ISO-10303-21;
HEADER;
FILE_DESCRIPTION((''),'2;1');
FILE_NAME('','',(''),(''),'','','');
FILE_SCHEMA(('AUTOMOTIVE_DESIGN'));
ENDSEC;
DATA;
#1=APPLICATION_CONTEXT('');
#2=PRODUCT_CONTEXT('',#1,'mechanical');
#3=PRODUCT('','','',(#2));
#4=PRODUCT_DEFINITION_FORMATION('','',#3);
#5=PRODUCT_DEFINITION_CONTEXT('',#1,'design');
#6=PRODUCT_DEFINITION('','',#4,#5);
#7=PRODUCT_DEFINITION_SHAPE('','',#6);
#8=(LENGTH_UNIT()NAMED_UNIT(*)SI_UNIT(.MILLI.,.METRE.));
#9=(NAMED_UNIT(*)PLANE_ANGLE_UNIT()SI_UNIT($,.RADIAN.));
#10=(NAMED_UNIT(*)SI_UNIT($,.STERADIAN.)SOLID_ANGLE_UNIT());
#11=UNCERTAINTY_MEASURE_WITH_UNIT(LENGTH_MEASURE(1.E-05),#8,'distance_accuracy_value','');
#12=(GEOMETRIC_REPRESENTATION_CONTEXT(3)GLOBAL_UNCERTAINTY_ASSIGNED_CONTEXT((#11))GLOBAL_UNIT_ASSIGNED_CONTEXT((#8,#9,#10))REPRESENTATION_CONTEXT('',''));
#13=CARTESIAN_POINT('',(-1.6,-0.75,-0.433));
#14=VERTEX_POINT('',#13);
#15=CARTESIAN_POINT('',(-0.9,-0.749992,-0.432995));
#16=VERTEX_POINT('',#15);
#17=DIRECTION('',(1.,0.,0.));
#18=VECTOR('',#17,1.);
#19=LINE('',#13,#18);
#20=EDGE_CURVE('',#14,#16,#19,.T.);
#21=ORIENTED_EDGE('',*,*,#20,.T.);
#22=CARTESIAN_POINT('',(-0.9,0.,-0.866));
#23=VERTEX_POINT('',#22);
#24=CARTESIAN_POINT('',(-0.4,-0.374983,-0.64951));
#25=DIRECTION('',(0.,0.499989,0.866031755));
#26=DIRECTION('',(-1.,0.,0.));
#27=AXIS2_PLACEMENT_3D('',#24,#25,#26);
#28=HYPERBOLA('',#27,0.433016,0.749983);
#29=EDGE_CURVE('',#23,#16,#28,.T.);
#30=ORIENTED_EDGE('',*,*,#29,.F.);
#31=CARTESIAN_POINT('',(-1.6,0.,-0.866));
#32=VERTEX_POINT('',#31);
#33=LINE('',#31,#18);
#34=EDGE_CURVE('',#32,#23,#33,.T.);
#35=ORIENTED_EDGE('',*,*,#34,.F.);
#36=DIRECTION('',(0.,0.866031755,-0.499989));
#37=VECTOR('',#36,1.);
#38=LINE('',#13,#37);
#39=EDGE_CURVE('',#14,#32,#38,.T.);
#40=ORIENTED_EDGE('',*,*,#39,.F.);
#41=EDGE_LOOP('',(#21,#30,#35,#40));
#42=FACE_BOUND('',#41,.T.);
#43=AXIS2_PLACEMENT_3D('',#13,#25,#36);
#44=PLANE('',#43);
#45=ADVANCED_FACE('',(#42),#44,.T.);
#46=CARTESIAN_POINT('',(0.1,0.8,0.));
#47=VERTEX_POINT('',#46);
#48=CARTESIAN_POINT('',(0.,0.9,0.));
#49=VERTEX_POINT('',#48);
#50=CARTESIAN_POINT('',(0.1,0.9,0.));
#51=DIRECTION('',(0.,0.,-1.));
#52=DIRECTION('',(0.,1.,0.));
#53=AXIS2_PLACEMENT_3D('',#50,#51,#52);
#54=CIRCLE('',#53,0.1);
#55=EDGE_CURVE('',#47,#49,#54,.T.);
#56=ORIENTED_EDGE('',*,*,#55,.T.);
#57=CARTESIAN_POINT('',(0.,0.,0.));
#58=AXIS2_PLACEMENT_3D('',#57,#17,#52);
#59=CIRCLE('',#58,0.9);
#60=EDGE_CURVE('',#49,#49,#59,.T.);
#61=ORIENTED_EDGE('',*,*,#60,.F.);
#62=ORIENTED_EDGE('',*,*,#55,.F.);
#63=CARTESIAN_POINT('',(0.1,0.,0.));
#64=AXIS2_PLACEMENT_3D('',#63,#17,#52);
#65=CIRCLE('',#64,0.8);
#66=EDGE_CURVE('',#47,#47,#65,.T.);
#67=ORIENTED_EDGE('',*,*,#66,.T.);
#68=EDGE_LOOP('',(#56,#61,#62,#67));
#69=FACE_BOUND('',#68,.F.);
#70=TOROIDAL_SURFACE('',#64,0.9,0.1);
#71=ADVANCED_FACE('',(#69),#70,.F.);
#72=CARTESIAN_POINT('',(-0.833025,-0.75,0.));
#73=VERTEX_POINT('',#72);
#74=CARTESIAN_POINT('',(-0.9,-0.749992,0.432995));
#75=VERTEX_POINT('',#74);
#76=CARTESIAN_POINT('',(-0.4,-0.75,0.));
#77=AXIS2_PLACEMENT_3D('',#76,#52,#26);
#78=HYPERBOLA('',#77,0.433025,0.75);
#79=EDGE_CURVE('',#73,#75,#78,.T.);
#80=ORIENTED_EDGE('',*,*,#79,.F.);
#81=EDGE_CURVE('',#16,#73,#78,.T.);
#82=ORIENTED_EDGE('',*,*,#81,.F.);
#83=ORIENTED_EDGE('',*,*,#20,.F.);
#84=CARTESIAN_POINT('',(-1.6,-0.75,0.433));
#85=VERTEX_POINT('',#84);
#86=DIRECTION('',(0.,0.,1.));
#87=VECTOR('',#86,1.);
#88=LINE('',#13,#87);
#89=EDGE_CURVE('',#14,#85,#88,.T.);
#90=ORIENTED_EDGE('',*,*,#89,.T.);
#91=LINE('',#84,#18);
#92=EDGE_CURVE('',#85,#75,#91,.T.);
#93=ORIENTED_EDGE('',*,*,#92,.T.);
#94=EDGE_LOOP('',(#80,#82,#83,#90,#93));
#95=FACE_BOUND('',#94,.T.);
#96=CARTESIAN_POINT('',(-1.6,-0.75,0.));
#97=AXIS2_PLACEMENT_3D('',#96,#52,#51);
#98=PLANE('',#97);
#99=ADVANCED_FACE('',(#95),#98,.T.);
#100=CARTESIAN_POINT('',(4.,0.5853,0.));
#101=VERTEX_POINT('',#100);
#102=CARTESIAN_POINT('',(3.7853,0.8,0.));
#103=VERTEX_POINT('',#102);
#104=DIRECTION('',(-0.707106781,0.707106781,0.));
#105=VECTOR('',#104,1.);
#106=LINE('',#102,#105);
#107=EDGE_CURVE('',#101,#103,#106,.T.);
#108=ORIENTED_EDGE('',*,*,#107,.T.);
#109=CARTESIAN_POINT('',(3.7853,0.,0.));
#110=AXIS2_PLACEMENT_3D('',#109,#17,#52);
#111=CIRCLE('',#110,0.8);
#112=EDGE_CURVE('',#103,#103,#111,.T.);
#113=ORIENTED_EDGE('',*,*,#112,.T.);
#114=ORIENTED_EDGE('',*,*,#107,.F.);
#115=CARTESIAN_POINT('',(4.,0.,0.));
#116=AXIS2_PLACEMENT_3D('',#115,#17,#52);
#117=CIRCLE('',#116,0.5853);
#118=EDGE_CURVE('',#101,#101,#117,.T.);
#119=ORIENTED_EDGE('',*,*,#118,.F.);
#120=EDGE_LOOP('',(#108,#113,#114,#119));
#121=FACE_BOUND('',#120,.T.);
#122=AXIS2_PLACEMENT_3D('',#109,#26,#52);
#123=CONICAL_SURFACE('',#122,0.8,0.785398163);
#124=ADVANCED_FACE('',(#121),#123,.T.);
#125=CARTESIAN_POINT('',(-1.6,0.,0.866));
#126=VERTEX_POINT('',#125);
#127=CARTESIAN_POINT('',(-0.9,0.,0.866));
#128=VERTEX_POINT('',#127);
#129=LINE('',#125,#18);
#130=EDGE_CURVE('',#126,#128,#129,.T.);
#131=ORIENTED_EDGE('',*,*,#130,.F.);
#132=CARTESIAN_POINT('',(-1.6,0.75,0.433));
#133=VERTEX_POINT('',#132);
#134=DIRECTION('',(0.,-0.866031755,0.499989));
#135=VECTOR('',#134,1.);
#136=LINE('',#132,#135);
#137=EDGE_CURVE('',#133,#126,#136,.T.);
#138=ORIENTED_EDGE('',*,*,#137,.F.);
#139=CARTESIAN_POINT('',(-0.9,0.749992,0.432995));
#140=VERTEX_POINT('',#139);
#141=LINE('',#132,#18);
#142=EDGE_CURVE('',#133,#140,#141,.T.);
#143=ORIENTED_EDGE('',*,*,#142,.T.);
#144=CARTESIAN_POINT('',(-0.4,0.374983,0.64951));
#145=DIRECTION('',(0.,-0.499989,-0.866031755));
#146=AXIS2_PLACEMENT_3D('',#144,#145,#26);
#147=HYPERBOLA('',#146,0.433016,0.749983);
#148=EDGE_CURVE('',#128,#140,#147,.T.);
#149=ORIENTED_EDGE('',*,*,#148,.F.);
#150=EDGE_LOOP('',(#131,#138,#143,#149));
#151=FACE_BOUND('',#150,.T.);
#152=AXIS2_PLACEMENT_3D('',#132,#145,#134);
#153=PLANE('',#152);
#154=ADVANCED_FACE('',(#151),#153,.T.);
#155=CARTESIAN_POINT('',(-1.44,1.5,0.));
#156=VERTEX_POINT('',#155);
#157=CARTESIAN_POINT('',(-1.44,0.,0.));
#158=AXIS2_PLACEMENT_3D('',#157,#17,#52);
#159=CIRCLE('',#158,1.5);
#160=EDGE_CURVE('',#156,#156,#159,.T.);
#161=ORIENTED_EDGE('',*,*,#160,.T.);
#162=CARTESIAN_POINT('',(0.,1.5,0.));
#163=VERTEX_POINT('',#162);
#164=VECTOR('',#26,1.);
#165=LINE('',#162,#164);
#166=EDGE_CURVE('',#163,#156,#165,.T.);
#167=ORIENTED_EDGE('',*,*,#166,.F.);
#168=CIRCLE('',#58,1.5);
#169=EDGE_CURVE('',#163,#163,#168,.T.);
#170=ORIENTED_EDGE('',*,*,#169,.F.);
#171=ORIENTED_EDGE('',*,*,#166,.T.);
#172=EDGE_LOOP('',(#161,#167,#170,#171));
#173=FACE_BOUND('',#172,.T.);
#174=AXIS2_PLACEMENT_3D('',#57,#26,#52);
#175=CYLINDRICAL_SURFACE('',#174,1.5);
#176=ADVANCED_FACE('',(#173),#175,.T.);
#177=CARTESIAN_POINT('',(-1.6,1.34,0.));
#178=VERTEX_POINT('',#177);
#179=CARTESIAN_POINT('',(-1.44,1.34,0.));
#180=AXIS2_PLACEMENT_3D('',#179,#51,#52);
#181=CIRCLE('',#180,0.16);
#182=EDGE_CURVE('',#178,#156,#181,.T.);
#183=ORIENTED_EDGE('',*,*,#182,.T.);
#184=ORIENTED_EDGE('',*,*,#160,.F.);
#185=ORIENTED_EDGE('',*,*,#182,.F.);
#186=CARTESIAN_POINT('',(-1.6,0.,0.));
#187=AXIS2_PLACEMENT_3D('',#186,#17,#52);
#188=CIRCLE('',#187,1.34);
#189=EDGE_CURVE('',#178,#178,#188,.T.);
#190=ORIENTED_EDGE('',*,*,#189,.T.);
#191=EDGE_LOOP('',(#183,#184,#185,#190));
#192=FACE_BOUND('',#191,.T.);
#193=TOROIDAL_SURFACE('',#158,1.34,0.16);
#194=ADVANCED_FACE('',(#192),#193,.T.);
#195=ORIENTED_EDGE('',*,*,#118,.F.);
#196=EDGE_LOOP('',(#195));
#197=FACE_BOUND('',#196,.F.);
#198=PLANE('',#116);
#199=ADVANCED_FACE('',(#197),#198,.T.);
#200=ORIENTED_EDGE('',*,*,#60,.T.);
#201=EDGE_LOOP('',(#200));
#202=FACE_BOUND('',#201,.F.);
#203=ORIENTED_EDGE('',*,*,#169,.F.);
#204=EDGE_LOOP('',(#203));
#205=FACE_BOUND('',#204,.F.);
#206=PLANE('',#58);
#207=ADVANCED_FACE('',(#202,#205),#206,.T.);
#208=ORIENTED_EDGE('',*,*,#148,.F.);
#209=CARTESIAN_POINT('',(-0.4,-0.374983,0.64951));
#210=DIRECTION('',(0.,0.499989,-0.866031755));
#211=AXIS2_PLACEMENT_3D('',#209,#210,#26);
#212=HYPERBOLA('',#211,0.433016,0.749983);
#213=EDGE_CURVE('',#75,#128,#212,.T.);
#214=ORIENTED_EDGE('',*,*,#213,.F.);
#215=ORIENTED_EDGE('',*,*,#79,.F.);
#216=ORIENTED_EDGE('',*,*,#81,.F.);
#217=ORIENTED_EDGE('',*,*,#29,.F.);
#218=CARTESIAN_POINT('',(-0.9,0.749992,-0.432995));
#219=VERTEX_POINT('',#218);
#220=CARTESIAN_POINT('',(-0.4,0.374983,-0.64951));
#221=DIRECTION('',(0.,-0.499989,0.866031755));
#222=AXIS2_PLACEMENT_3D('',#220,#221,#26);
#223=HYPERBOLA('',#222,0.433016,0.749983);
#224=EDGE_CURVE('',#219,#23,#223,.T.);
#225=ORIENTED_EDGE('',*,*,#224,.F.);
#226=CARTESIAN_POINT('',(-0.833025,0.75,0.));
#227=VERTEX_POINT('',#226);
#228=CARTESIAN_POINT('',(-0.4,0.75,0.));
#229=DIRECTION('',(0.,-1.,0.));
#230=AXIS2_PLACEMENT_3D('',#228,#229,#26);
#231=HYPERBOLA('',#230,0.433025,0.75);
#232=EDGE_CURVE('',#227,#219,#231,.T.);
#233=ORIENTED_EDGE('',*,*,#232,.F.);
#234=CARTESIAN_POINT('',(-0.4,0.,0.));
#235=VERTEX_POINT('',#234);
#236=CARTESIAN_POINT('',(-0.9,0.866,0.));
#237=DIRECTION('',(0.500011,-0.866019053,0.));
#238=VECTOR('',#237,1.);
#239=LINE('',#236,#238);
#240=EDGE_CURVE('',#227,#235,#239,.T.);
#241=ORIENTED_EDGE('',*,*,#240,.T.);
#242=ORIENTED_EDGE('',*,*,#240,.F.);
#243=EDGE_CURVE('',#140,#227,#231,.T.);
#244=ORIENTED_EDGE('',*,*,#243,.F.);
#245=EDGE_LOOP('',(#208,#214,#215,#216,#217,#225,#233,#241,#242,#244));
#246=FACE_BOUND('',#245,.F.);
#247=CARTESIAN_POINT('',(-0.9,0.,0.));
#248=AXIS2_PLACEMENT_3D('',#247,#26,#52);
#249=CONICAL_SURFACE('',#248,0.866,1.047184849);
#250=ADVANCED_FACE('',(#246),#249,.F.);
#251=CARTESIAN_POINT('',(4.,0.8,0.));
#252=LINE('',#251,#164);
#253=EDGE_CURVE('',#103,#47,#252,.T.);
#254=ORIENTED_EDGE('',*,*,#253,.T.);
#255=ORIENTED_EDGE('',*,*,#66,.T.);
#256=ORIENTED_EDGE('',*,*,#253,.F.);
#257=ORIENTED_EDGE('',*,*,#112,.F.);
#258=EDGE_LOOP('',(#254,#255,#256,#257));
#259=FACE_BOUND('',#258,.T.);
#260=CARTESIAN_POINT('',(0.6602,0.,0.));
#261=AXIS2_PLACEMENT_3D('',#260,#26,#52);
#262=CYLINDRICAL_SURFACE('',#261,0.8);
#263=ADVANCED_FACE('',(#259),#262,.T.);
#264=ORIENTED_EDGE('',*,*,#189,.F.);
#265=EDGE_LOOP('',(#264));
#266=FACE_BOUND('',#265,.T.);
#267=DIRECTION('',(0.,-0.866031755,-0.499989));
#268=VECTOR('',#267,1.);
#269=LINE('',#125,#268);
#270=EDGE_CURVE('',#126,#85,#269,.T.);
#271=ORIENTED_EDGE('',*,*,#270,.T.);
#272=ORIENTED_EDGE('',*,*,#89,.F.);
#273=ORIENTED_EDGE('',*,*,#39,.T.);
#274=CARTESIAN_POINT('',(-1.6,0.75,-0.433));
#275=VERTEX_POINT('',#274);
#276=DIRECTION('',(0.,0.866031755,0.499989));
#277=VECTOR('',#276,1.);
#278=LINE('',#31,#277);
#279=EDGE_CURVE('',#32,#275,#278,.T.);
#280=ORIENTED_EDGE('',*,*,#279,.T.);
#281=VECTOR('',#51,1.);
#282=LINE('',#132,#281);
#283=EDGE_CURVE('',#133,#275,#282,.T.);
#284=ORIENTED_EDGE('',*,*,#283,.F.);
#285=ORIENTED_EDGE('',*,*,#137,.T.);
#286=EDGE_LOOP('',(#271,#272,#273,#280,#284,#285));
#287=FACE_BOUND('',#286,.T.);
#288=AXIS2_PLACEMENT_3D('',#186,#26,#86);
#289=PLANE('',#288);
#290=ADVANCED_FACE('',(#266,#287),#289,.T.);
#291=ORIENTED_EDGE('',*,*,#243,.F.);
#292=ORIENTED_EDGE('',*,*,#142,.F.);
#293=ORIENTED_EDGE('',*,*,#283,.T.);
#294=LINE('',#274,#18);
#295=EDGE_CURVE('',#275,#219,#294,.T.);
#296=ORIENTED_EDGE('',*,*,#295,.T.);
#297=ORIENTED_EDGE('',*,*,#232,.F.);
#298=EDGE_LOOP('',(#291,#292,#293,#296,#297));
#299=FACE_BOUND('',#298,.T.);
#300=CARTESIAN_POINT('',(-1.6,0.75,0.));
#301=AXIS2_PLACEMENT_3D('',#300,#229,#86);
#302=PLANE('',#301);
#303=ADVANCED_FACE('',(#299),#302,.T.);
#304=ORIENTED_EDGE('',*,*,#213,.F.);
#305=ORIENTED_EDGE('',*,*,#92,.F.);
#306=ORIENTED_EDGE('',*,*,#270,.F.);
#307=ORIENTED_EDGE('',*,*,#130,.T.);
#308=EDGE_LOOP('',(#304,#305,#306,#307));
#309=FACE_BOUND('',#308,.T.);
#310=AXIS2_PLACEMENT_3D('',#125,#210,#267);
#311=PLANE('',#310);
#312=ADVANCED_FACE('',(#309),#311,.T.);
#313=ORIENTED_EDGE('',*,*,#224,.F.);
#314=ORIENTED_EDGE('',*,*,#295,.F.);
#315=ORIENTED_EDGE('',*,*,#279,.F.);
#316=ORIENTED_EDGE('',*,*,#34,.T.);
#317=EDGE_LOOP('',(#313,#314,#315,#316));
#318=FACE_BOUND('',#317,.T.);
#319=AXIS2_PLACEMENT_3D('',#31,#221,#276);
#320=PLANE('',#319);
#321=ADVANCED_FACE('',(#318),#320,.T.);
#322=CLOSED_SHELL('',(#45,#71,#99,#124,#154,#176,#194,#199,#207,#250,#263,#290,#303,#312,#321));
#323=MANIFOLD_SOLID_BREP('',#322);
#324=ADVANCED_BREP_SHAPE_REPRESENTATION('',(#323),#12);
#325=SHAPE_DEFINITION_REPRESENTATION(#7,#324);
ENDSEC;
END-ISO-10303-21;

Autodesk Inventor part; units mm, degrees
ref_plane "YZ Plane" through (0, 0, 0) normal (1, 0, 0) x (0, 1, 0)
ref_plane "XZ Plane" through (0, 0, 0) normal (0, 1, 0) x (-1, 0, 0)
sketch "Sketch1" plane through (0, 0, 0) normal (0, 0, 1) x (1, 0, 0)
  line L0 (-0.4, 0) -> (4, 0)
  line L1 (4, 0) -> (4, 0.8)
  line L2 (4, 0.8) -> (0.875, 0.8)
  line L3 (0.875, 0.8) -> (0.6602, 0.8)
  line L4 (0.6602, 0.8) -> (0, 0.8)
  line L5 (0, 0.8) -> (0, 1.5)
  line L6 (0, 1.5) -> (-1.6, 1.5)
  line L7 (-1.6, 1.5) -> (-1.6, 0.866)
  line L8 (-1.6, 0.866) -> (-0.9, 0.866)
  line L9 (-0.9, 0.866) -> (-0.4, 0)
  line L10 (-2.72, 0) -> (5.12, 0) projected
  line L11 (0, -0.3) -> (0, 1.8) projected
  line L12 (0.875, 0.8) -> (0, 0.8) construction
  dimension "d1" = 3.125
  dimension "d2" = 0.2148
  dimension "d3" = 1.6
  dimension "d4" = 0.7
  dimension "d5" = 60
  dimension "d6" = 1.6
  dimension "d7" = 1.6
  dimension "d8" = 1.7321
  dimension "d9" = 3
  dimension "d26" = 4
revolve "Body" add sketch "Sketch1" angle 360 about axis through (-0.4, 0, 0) along (1, 0, 0)
sketch "Sketch2" plane through (-1.6, 0, 0) normal (-1, 0, 0) x (0, 0, 1)
  circle A0 centre (0, 0) radius 0.866 projected
  line L0 (0, -2.1) -> (0, 2.1) projected
  line L1 (-2.1, 0) -> (2.1, 0) projected
  line L2 (0.866, 0) -> (0.433, -0.75)
  line L3 (0.433, -0.75) -> (-0.433, -0.75)
  line L4 (-0.433, -0.75) -> (-0.866, 0)
  line L5 (-0.866, 0) -> (-0.433, 0.75)
  line L6 (-0.433, 0.75) -> (0.433, 0.75)
  line L7 (0.433, 0.75) -> (0.866, 0)
extrude "Slot" add sketch "Sketch2" against normal up to next contours L7 A0 | A0 L2 | L6 L0 A0 | A0 L0 L3 | L0 L6 A0 | A0 L3 L0 | L4 A0 | A0 L5
fillet "Fillet1" radius 0.16 1 edges at (-1.6, -1.5, 0)
thread "Thread" size "M1.6x0.35" class "6g" standard "ISO Metric profile" length 3.125
chamfer "Chamfer1" distance 0.2147 distance2 0.2147 1 edges at (4, -0.8, 0) measured on face at (4, -0.0946, 0.2493)
ref_plane "Work Plane1" through (29, 0, 0) normal (0, -1, 0) x (1, 0, 0)
fillet "Fillet2" radius 0.1 1 edges at (0, -0.8, 0)
equation "\"d30\" = R"
equation "\"d17\" = RR"
equation "\"d13\" = GEL"
equation "\"d15\" = -0.5 * SPD + 0.5 * GD"
equation "\"d16\" = GUL"
equation "\"d1\" = GEL"
equation "\"d3\" = KOH"
equation "\"d4\" = INTI"
equation "\"d6\" = GD"
equation "\"d7\" = BDM"
equation "\"d8\" = 1.1547 * SW"
equation "\"d9\" = KOD"
equation "\"d26\" = NLG"
equation "\"GD\" = 1.6"
equation "\"NLG\" = 4"
equation "\"GEL\" = 3.125"
equation "\"KOD\" = 3"
equation "\"KOH\" = 1.6"
equation "\"INTI\" = 0.7"
equation "\"GAL\" = 0.61345 * PTC"
equation "\"GUL\" = 0.61345 * PTC"
equation "\"BDM\" = NND"
equation "\"SW\" = 1.5"
equation "\"RR\" = 0.16"
equation "\"SPD\" = NND - 1.2269 * PTC"
equation "\"R\" = 0.1"
equation "\"TOA\" = 30deg"
equation "\"GD1\" = THREADDIA - 1.2269 * PTC"
equation "\"THREADDIA\" = 1.6"
equation "\"FAWI\" = 45deg"
equation "\"PTC\" = 0.35"
equation "\"NND\" = 1.6"
equation "\"E0\" = 1.155 * SW"
properties part number "ISO 4762 - M1.6 x 4" material "Stainless Steel, 440C"
